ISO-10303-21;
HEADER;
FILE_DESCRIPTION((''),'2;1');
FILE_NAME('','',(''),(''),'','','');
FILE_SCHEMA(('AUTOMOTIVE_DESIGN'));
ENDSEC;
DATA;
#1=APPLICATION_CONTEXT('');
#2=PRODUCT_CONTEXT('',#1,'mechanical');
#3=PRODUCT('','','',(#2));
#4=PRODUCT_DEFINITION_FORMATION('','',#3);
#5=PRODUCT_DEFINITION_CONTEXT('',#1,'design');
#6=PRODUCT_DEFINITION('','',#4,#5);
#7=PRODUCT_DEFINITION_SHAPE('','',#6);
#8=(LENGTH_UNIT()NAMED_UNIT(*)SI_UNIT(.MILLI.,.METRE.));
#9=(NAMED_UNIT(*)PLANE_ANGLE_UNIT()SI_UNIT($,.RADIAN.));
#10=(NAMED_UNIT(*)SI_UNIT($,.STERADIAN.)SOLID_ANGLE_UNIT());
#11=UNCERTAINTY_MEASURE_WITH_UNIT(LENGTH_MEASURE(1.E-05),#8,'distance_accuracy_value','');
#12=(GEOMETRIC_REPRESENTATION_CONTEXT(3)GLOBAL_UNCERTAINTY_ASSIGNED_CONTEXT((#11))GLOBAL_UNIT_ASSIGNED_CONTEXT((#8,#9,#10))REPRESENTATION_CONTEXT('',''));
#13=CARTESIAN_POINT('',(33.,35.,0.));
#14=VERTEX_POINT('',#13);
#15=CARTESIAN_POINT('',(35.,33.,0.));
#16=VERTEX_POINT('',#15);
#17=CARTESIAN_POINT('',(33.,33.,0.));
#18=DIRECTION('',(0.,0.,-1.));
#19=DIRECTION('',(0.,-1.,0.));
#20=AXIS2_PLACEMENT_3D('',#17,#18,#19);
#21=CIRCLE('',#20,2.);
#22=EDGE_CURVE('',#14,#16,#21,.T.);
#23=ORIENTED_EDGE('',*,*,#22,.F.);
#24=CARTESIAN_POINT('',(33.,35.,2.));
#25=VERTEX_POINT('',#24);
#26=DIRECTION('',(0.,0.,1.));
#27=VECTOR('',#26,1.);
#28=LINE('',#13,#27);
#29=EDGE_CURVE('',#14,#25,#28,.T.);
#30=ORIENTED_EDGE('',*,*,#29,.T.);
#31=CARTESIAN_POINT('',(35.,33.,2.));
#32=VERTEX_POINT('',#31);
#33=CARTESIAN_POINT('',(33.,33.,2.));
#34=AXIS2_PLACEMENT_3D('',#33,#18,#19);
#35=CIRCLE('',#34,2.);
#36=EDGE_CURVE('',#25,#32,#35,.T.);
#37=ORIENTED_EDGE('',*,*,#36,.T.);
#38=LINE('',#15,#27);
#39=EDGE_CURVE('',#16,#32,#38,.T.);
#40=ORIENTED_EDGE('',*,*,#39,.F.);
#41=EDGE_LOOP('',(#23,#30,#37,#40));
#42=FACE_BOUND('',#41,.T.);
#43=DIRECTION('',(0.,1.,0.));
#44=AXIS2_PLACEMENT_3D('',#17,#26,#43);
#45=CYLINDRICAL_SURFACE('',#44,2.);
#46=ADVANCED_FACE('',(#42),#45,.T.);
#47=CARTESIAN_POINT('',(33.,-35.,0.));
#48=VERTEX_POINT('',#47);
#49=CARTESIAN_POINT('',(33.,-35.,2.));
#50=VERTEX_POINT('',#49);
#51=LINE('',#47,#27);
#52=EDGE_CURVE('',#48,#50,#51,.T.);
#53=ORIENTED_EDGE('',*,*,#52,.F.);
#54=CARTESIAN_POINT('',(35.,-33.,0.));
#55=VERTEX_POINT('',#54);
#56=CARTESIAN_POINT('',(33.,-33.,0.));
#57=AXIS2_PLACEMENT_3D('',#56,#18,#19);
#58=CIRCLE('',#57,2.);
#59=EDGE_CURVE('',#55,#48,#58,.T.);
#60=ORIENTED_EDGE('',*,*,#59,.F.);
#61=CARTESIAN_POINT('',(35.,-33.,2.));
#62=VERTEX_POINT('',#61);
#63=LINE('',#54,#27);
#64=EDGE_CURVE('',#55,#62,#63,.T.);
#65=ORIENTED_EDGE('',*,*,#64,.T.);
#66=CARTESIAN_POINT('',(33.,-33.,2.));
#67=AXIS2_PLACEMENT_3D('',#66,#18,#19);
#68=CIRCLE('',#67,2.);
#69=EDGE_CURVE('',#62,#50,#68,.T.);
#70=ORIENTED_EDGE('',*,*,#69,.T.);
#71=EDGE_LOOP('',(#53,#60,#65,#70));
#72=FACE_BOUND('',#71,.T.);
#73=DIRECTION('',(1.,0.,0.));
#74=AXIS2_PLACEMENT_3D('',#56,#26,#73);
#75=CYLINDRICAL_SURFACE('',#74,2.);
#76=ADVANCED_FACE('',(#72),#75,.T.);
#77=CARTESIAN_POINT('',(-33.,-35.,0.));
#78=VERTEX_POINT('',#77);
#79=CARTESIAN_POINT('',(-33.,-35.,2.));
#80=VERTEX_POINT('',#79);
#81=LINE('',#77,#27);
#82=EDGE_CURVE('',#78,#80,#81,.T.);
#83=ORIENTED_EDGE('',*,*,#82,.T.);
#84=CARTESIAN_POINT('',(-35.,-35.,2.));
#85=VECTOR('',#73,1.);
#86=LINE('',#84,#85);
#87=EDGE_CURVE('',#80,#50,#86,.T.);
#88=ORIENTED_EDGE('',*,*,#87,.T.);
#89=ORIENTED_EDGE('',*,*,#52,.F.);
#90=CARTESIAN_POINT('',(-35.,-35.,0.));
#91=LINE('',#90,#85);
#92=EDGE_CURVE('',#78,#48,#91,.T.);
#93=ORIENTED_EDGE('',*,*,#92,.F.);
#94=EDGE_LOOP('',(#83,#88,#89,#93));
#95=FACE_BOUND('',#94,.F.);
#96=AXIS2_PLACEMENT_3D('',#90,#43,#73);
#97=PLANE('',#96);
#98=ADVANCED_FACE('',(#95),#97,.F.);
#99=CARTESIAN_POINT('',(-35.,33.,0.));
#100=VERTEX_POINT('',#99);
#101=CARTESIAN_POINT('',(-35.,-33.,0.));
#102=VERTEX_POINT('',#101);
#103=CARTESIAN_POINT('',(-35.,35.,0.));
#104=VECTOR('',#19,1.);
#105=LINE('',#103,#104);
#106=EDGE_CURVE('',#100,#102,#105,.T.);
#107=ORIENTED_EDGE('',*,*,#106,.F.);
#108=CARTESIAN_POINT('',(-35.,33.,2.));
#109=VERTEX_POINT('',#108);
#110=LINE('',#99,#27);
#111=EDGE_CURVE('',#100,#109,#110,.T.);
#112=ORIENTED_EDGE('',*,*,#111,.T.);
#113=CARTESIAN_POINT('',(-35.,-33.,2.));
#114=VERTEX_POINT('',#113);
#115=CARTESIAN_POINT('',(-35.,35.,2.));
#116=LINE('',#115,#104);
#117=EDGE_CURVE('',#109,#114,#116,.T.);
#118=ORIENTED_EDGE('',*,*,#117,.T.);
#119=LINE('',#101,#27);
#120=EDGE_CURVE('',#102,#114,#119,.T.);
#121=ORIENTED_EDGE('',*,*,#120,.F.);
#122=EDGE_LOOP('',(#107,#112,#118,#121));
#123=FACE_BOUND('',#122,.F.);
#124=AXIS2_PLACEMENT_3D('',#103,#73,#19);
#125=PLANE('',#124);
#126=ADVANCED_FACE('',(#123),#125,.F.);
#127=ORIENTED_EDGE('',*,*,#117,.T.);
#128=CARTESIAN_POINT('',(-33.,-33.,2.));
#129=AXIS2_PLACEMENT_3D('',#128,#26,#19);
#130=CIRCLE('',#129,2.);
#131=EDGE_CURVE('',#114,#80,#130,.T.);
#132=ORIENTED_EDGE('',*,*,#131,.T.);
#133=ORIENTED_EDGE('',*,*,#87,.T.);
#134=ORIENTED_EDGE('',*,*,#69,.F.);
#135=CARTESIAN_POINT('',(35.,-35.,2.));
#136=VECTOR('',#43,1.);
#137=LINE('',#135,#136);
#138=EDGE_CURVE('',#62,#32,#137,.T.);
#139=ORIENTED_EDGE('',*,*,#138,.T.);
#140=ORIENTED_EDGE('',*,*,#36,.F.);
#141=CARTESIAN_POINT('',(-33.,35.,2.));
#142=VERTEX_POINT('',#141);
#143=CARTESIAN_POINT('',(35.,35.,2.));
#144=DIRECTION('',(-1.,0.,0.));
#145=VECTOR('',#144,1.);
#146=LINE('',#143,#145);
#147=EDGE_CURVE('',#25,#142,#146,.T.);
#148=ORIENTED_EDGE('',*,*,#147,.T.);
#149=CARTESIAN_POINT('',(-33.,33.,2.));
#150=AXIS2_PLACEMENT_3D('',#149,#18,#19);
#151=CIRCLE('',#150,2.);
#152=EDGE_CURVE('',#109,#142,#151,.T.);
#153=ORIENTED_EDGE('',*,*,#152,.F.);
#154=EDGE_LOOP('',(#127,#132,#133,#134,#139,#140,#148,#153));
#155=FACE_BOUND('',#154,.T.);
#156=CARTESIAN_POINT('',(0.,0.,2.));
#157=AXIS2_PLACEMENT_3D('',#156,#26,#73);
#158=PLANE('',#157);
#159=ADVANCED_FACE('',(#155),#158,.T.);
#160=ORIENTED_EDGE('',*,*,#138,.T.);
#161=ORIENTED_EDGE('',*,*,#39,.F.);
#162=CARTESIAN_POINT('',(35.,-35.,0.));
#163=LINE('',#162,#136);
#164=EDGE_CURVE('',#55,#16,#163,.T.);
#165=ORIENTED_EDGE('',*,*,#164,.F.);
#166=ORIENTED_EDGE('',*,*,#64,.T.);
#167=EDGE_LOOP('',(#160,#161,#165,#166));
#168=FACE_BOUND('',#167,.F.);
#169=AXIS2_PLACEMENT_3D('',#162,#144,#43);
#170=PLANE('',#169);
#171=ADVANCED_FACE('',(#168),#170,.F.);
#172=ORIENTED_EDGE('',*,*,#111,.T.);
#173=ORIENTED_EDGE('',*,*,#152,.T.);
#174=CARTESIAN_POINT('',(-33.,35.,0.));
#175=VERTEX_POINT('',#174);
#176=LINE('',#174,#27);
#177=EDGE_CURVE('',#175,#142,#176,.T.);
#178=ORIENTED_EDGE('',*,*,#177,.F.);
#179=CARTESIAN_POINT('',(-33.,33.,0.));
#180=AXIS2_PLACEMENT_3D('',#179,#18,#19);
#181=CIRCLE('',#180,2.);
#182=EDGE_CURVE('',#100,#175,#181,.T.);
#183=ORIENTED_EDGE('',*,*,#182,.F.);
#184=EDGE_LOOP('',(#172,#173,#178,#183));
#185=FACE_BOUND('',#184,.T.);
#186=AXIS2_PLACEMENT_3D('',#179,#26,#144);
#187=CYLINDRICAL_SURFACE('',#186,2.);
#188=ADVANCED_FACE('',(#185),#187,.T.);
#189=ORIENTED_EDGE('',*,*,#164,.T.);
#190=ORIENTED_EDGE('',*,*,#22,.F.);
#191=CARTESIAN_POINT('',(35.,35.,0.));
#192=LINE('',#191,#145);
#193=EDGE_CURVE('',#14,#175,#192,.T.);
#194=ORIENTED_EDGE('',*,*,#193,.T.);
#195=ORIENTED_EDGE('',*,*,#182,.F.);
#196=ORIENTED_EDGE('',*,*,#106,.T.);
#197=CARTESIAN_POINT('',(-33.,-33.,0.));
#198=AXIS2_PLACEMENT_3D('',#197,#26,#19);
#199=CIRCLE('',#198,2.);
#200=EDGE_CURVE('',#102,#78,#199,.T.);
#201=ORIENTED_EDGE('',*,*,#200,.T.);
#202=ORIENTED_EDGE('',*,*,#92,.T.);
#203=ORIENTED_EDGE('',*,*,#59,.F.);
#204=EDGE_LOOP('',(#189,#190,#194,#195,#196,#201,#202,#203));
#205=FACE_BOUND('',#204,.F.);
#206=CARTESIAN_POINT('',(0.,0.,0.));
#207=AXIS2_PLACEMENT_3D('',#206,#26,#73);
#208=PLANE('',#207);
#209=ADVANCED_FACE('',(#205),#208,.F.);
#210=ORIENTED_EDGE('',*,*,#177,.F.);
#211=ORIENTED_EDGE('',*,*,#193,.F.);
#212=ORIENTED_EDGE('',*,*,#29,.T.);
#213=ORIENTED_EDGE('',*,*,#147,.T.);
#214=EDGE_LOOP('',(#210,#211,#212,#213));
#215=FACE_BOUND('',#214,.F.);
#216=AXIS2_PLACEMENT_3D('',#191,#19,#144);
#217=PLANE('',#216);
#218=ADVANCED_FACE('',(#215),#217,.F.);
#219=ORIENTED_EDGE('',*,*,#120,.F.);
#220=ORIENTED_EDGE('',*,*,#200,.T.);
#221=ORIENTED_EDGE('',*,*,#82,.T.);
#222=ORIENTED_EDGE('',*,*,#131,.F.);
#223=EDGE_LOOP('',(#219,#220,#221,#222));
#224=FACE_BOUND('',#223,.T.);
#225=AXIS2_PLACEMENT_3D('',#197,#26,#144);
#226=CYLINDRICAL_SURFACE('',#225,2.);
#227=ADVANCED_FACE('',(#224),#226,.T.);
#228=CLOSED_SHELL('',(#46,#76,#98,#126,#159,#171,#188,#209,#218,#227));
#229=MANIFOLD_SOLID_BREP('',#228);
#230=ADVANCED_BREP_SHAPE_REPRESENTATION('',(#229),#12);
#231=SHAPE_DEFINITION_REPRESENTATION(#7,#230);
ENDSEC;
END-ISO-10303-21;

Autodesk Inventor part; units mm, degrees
ref_plane "YZ Plane" through (0, 0, 0) normal (1, 0, 0) x (0, 1, 0)
ref_plane "XZ Plane" through (0, 0, 0) normal (0, 1, 0) x (-1, 0, 0)
ref_plane "XY Plane" through (0, 0, 0) normal (0, 0, 1) x (1, 0, 0)
sketch "Sketch1" plane through (0, 0, 0) normal (0, 0, 1) x (1, 0, 0)
  line L0 (-35, -35) -> (35, -35)
  line L1 (35, -35) -> (35, 35)
  line L2 (35, 35) -> (-35, 35)
  line L3 (-35, 35) -> (-35, -35)
  line L4 (-35, -35) -> (35, 35) construction
  line L5 (35, -35) -> (-35, 35) construction
  point P0 (0, 0)
  dimension "d154" = 70
  dimension "d155" = 70
extrude "Plate5" add sketch "Sketch1" along normal blind 2
fillet "Corner Round1" radius 2 4 edges at (35, 35, 1) (-35, -35, 1) (-35, 35, 1) (35, -35, 1)
sketch "Sketch11" plane through (-50.5, -22, -28) normal (1, 0, 0) x (0, 0, -1)
  line L0 (-25.25, 44) -> (-25.25, 0) construction
  line L1 (0, 0) -> (-25.25, 0) construction
  line L2 (0, 0) -> (0, 44) construction
  line L3 (0, 44) -> (-25.25, 44) construction
  circle A0 centre (-10, 22) radius 5.5
  point P0 (-28, 22)
  point P1 (0, 22)
  dimension "d192" = 11
  dimension "d193" = 10
cut "Cut3" [suppressed]
feature "Corner Round3" [suppressed]
sketch "Sketch10" plane through (-37, 33, 2) normal (1, 0, 0) x (0, 1, 0)
  line L0 (-66, 0) -> (0, 0)
  line L1 (0, 0) -> (0, -30)
  line L2 (0, -30) -> (-66, -30)
  line L3 (-66, -30) -> (-66, 0)
properties part number "PRS 8424 FDS diam way cup_D940" material "Stainless Steel"
